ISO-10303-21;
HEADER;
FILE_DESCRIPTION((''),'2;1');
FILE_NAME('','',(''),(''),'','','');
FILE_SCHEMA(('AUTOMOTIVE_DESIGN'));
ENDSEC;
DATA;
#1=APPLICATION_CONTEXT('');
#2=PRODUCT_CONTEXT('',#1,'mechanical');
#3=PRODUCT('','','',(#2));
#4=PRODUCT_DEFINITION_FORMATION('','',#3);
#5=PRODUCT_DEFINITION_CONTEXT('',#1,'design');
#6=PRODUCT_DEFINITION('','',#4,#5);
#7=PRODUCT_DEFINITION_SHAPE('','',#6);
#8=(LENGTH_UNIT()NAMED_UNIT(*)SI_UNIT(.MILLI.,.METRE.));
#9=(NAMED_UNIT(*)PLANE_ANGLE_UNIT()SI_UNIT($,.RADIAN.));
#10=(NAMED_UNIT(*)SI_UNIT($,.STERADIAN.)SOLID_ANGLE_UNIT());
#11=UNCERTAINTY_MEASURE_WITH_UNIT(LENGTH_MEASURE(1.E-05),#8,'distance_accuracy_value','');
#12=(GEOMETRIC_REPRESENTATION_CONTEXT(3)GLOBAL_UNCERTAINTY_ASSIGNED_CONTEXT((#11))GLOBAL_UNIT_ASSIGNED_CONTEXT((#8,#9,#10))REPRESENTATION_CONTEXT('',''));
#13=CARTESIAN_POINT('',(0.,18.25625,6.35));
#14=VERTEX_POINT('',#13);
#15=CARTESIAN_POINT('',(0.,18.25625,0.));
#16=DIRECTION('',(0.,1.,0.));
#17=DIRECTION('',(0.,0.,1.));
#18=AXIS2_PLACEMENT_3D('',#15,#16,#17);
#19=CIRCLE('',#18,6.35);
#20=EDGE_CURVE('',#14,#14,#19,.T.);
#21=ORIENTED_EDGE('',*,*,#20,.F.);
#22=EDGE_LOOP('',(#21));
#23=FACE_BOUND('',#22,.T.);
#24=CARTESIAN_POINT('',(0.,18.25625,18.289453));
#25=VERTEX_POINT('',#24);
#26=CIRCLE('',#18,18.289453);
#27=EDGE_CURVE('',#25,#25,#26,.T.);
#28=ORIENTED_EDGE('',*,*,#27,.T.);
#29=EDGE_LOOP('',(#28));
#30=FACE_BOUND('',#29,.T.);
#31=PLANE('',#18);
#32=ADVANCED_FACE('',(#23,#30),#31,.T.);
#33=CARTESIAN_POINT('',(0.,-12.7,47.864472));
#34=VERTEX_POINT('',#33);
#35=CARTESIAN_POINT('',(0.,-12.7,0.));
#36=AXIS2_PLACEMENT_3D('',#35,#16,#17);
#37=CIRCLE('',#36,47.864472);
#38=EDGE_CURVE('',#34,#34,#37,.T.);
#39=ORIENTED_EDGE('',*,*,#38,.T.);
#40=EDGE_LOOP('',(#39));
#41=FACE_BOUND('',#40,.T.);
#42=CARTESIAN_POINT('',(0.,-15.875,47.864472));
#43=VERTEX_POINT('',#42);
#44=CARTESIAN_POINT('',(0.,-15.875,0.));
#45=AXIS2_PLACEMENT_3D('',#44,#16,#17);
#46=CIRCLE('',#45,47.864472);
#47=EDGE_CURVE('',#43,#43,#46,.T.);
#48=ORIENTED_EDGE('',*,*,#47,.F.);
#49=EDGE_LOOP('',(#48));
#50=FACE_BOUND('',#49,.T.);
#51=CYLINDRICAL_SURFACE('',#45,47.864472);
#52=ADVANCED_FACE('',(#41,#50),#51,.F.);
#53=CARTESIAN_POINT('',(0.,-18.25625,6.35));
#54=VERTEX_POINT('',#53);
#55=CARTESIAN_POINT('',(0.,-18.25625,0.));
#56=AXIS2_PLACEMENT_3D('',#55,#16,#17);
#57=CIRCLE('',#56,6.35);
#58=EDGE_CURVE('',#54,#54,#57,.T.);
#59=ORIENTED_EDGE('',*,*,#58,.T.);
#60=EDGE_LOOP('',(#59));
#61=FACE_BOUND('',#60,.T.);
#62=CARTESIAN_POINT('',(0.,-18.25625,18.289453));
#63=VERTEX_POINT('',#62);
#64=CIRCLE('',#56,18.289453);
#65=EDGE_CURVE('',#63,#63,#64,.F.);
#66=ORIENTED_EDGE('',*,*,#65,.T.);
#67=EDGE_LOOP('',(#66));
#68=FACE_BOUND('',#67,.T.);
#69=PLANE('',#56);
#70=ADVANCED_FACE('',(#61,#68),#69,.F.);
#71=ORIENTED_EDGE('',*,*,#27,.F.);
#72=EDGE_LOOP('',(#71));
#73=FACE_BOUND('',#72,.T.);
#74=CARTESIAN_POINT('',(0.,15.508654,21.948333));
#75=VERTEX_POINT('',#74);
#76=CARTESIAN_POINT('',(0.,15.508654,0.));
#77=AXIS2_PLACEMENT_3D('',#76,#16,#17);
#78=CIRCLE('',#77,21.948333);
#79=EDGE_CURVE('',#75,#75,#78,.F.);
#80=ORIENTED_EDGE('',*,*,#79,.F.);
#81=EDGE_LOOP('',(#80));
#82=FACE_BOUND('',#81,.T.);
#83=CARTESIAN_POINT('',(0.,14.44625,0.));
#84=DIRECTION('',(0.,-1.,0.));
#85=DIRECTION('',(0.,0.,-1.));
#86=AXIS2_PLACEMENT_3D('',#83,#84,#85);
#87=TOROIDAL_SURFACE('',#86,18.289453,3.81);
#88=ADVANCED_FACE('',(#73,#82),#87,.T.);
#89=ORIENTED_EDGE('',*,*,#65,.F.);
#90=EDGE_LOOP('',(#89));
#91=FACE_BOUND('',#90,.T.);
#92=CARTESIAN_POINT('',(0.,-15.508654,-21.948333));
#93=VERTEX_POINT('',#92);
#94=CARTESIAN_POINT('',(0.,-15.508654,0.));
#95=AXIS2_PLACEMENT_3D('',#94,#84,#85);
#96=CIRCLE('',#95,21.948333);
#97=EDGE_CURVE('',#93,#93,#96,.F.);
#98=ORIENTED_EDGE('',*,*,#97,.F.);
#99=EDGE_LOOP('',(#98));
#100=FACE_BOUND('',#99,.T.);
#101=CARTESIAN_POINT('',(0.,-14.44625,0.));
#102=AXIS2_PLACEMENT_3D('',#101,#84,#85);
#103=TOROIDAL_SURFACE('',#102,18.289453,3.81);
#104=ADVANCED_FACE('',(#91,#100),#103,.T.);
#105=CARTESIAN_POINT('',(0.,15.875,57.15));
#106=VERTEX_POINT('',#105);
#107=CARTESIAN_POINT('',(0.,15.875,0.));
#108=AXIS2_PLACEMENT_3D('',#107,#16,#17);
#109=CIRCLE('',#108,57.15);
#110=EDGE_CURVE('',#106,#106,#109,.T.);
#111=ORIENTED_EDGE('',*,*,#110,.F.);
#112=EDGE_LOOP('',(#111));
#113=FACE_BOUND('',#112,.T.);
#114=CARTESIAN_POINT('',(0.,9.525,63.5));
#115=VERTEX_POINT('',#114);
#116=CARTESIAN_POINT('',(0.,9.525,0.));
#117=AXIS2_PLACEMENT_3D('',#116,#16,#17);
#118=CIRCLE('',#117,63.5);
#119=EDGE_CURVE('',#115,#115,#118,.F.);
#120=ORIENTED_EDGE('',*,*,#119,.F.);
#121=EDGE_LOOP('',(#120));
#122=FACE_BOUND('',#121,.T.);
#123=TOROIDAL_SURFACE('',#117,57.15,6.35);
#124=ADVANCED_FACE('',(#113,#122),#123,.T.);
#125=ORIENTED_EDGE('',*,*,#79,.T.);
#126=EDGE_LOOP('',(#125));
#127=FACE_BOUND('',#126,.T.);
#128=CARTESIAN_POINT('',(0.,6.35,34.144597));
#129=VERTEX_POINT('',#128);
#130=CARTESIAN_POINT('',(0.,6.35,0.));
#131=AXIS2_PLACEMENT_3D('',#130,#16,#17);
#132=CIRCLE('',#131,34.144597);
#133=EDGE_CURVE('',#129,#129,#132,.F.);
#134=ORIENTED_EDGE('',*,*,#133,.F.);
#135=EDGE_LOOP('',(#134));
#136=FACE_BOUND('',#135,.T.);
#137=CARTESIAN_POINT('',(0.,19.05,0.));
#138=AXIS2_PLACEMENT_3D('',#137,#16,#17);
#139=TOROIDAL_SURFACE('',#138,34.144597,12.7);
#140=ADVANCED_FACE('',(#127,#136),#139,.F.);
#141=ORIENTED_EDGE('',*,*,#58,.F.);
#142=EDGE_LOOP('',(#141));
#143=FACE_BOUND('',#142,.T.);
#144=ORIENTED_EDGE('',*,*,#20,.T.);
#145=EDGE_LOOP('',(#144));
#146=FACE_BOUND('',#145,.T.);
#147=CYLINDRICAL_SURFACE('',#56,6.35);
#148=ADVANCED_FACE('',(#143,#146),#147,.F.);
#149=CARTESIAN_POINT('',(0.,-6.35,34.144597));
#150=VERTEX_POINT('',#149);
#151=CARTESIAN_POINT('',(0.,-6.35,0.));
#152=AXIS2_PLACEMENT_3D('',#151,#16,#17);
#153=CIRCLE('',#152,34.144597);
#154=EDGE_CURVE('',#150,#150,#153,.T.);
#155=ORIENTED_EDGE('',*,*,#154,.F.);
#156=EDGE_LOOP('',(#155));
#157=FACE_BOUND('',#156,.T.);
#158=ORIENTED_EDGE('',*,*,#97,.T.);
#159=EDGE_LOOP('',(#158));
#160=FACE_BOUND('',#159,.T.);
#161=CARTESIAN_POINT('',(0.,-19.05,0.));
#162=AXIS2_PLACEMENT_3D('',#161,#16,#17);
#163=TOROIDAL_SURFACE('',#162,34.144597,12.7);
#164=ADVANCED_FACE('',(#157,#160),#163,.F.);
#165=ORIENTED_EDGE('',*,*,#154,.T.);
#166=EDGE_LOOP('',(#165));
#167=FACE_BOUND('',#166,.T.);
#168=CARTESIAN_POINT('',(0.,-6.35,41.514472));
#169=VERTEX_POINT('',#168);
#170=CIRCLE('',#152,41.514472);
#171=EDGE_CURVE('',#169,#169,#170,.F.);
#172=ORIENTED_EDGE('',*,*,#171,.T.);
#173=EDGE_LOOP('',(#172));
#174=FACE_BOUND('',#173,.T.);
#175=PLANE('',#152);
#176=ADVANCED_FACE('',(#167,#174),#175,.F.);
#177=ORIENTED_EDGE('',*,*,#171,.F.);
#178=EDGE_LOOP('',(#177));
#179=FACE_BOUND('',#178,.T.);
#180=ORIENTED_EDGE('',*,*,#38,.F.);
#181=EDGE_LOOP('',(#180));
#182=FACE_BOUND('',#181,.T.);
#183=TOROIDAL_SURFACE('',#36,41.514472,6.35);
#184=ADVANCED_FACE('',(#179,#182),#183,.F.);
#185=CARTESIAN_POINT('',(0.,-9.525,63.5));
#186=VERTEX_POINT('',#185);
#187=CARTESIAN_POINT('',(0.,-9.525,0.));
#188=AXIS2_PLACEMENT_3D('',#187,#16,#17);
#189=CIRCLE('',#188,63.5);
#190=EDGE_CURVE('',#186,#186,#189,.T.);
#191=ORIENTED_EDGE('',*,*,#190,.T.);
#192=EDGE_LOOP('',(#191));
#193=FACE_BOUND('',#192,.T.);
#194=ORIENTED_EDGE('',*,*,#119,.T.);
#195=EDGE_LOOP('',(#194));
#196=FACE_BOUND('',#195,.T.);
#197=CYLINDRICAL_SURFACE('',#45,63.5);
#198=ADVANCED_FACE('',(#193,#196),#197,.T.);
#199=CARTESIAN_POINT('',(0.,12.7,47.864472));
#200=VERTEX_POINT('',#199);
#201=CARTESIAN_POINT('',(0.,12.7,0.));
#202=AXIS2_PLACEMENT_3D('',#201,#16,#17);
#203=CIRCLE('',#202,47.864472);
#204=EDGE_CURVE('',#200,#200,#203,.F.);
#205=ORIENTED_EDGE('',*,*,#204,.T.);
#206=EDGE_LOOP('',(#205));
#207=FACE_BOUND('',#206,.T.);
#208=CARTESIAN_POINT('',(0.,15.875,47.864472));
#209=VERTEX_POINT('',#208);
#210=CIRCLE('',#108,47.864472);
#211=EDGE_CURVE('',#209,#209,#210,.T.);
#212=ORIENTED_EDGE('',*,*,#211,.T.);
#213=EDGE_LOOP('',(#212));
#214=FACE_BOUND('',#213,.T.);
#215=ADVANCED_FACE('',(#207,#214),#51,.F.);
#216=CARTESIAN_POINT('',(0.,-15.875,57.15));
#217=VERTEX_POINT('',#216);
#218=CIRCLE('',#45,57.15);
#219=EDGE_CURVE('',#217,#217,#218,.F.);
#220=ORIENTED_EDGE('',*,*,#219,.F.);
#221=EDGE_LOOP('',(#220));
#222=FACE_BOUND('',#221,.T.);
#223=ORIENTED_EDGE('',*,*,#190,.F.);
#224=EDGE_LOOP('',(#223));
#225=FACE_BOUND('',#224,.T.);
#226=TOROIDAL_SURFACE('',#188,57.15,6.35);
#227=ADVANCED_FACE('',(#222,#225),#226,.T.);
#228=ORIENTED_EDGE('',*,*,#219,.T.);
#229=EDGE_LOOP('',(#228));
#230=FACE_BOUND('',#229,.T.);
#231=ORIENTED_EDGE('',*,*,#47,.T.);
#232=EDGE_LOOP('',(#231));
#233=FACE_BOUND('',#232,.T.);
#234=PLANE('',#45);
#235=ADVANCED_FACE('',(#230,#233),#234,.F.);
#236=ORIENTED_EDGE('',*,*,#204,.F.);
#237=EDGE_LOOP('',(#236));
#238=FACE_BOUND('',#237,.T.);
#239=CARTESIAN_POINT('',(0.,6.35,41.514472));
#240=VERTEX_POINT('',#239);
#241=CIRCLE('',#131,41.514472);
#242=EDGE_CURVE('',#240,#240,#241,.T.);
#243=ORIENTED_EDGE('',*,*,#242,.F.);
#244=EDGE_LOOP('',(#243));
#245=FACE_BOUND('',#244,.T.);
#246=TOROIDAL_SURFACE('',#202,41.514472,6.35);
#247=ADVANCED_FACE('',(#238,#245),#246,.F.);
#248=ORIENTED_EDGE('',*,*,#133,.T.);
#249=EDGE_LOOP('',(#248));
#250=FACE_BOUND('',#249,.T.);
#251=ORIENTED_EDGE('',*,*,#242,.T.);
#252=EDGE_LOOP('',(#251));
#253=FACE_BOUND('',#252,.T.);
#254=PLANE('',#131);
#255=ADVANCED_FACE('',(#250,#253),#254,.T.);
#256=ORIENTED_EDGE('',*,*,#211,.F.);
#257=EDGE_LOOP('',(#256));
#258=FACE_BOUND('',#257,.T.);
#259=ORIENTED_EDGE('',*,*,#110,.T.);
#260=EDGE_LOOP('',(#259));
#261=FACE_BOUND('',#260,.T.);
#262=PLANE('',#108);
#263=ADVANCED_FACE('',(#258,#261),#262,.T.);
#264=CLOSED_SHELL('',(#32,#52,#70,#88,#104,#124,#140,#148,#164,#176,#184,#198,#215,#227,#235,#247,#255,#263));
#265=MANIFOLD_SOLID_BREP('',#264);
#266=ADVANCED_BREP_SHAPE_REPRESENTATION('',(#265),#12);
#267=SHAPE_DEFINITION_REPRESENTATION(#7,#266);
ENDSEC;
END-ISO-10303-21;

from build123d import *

# Parameters (mm, degrees)
BOSS_EXTRUDE4_DEPTH      = 15.875
BOSS_EXTRUDE4_DEPTH_BACK = 15.875
SKETCH1_R                = 63.5
SKETCH1_R_2              = 47.864471796
BOSS_EXTRUDE5_DEPTH      = 18.25625
BOSS_EXTRUDE5_DEPTH_BACK = 18.25625
SKETCH1_9_R              = 21.469426169
SKETCH1_9_R_2            = 6.35
BOSS_EXTRUDE6_DEPTH      = 6.35
BOSS_EXTRUDE6_DEPTH_BACK = 6.35
SKETCH1_10_R             = 47.864471796
SKETCH1_10_R_2           = 21.469426169
FILLET1_R                = 6.35
FILLET2_R                = 6.35
FILLET2_R_2              = 12.7
FILLET3_R                = 3.81


with BuildPart() as part:
    # Sketch1 → Boss-Extrude4 (new, two sides: drawn at the far end of the back side and taken through both)
    with BuildSketch(Plane(origin=(0, 0, 0), x_dir=(1, 0, 0), z_dir=(0, 1, 0)).offset(-BOSS_EXTRUDE4_DEPTH_BACK)):
        with Locations(Location((0, 0, 0), (0, 0, 270))):
            Circle(SKETCH1_R)
        with Locations(Location((0, 0, 0), (0, 0, 270))):
            Circle(SKETCH1_R_2, mode=Mode.SUBTRACT)
    extrude(amount=BOSS_EXTRUDE4_DEPTH + BOSS_EXTRUDE4_DEPTH_BACK)



with BuildPart() as body_2:
    # Sketch1<9> → Boss-Extrude5 (new, two sides: drawn at the far end of the back side and taken through both)
    with BuildSketch(Plane(origin=(0, 0, 0), x_dir=(1, 0, 0), z_dir=(0, 1, 0)).offset(-BOSS_EXTRUDE5_DEPTH_BACK)):
        with Locations(Location((0, 0, 0), (0, 0, 270))):
            Circle(SKETCH1_9_R)
        with Locations(Location((0, 0, 0), (0, 0, 270))):
            Circle(SKETCH1_9_R_2, mode=Mode.SUBTRACT)
    extrude(amount=BOSS_EXTRUDE5_DEPTH + BOSS_EXTRUDE5_DEPTH_BACK)


with BuildPart() as part_1:
    add(part.part)

    add(body_2.part)  # Boss-Extrude6 merges body 2
    # Sketch1<10> → Boss-Extrude6 (add, two sides: drawn at the far end of the back side and taken through both)
    with BuildSketch(Plane(origin=(0, 0, 0), x_dir=(1, 0, 0), z_dir=(0, 1, 0)).offset(-BOSS_EXTRUDE6_DEPTH_BACK)):
        with Locations(Location((0, 0, 0), (0, 0, 270))):
            Circle(SKETCH1_10_R)
        with Locations(Location((0, 0, 0), (0, 0, 270))):
            Circle(SKETCH1_10_R_2, mode=Mode.SUBTRACT)
    extrude(amount=BOSS_EXTRUDE6_DEPTH + BOSS_EXTRUDE6_DEPTH_BACK)

    # Fillet1
    fillet1_edges = [part_1.edges().sort_by_distance(p)[0] for p in [
        (0, -15.875, -63.5),
        (0, 15.875, -63.5),
    ]]
    fillet(fillet1_edges, radius=FILLET1_R)

    # Fillet2
    # the kernel refuses this fillet: 12.7, 6.35 mm, written as the material it adds along each edge
    with BuildSketch(Plane(origin=(0, -6.35, 0), x_dir=(0, 0, 1), z_dir=(-1, 0, 0))) as fillet2_piece_1:
        with BuildLine():
            CenterArc((47.864471796 - FILLET2_R, -FILLET2_R), FILLET2_R, 0, 90)
            Line((47.864471796 - FILLET2_R, 0), (47.864471796 - FILLET2_R, FILLET2_R * 0.02))
            Line((47.864471796 - FILLET2_R, FILLET2_R * 0.02), (47.864471796 + FILLET2_R * 0.02, FILLET2_R * 0.02))
            Line((47.864471796 + FILLET2_R * 0.02, FILLET2_R * 0.02), (47.864471796 + FILLET2_R * 0.02, -FILLET2_R))
            Line((47.864471796 + FILLET2_R * 0.02, -FILLET2_R), (47.864471796, -FILLET2_R))
        make_face()
    revolve(axis=Axis((0, -6.35, 0), (0, 1, 0)))
    with BuildSketch(Plane(origin=(0, 6.35, 0), x_dir=(0, 0, 1), z_dir=(-1, 0, 0))) as fillet2_piece_2:
        with BuildLine():
            CenterArc((47.864471796 - FILLET2_R, FILLET2_R), FILLET2_R, 270, 90)
            Line((47.864471796 - FILLET2_R, 0), (47.864471796 - FILLET2_R, -FILLET2_R * 0.02))
            Line((47.864471796 - FILLET2_R, -FILLET2_R * 0.02), (47.864471796 + FILLET2_R * 0.02, -FILLET2_R * 0.02))
            Line((47.864471796 + FILLET2_R * 0.02, -FILLET2_R * 0.02), (47.864471796 + FILLET2_R * 0.02, FILLET2_R))
            Line((47.864471796 + FILLET2_R * 0.02, FILLET2_R), (47.864471796, FILLET2_R))
        make_face()
    revolve(axis=Axis((0, 6.35, 0), (0, 1, 0)))
    with BuildSketch(Plane(origin=(0, -6.35, 0), x_dir=(0, 0, 1), z_dir=(-1, 0, 0))) as fillet2_piece_3:
        with BuildLine():
            CenterArc((34.144597211, -12.7), FILLET2_R_2, 90, 86.416678302)
            Line((21.469426169, -11.90625), (21.215922748, -11.890375))
            ThreePointArc((21.215922748, -11.890375), (21.215426169, -5.953125), (21.215426169, 0))
            Line((21.215426169, 0), (21.469426169, 0.254))
            Line((21.469426169, 0.254), (34.144597211, 0.254))
            Line((34.144597211, 0.254), (34.144597211, 0))
        make_face()
    revolve(axis=Axis((0, -6.35, 0), (0, 1, 0)))
    with BuildSketch(Plane(origin=(0, 6.35, 0), x_dir=(0, 0, 1), z_dir=(-1, 0, 0))) as fillet2_piece_4:
        with BuildLine():
            CenterArc((34.144597211, 12.7), FILLET2_R_2, 183.583321698, 86.416678302)
            Line((21.469426169, 11.90625), (21.215922748, 11.890375))
            ThreePointArc((21.215922748, 11.890375), (21.215426169, 5.953125), (21.215426169, 0))
            Line((21.215426169, 0), (21.469426169, -0.254))
            Line((21.469426169, -0.254), (34.144597211, -0.254))
            Line((34.144597211, -0.254), (34.144597211, 0))
        make_face()
    revolve(axis=Axis((0, 6.35, 0), (0, 1, 0)))

    # Fillet3
    fillet3_edges = [part_1.edges().sort_by_distance(p)[0] for p in [
        (0, -18.25625, -21.469426169),
        (0, 18.25625, -21.469426169),
    ]]
    fillet(fillet3_edges, radius=FILLET3_R)


solid = part_1.part
